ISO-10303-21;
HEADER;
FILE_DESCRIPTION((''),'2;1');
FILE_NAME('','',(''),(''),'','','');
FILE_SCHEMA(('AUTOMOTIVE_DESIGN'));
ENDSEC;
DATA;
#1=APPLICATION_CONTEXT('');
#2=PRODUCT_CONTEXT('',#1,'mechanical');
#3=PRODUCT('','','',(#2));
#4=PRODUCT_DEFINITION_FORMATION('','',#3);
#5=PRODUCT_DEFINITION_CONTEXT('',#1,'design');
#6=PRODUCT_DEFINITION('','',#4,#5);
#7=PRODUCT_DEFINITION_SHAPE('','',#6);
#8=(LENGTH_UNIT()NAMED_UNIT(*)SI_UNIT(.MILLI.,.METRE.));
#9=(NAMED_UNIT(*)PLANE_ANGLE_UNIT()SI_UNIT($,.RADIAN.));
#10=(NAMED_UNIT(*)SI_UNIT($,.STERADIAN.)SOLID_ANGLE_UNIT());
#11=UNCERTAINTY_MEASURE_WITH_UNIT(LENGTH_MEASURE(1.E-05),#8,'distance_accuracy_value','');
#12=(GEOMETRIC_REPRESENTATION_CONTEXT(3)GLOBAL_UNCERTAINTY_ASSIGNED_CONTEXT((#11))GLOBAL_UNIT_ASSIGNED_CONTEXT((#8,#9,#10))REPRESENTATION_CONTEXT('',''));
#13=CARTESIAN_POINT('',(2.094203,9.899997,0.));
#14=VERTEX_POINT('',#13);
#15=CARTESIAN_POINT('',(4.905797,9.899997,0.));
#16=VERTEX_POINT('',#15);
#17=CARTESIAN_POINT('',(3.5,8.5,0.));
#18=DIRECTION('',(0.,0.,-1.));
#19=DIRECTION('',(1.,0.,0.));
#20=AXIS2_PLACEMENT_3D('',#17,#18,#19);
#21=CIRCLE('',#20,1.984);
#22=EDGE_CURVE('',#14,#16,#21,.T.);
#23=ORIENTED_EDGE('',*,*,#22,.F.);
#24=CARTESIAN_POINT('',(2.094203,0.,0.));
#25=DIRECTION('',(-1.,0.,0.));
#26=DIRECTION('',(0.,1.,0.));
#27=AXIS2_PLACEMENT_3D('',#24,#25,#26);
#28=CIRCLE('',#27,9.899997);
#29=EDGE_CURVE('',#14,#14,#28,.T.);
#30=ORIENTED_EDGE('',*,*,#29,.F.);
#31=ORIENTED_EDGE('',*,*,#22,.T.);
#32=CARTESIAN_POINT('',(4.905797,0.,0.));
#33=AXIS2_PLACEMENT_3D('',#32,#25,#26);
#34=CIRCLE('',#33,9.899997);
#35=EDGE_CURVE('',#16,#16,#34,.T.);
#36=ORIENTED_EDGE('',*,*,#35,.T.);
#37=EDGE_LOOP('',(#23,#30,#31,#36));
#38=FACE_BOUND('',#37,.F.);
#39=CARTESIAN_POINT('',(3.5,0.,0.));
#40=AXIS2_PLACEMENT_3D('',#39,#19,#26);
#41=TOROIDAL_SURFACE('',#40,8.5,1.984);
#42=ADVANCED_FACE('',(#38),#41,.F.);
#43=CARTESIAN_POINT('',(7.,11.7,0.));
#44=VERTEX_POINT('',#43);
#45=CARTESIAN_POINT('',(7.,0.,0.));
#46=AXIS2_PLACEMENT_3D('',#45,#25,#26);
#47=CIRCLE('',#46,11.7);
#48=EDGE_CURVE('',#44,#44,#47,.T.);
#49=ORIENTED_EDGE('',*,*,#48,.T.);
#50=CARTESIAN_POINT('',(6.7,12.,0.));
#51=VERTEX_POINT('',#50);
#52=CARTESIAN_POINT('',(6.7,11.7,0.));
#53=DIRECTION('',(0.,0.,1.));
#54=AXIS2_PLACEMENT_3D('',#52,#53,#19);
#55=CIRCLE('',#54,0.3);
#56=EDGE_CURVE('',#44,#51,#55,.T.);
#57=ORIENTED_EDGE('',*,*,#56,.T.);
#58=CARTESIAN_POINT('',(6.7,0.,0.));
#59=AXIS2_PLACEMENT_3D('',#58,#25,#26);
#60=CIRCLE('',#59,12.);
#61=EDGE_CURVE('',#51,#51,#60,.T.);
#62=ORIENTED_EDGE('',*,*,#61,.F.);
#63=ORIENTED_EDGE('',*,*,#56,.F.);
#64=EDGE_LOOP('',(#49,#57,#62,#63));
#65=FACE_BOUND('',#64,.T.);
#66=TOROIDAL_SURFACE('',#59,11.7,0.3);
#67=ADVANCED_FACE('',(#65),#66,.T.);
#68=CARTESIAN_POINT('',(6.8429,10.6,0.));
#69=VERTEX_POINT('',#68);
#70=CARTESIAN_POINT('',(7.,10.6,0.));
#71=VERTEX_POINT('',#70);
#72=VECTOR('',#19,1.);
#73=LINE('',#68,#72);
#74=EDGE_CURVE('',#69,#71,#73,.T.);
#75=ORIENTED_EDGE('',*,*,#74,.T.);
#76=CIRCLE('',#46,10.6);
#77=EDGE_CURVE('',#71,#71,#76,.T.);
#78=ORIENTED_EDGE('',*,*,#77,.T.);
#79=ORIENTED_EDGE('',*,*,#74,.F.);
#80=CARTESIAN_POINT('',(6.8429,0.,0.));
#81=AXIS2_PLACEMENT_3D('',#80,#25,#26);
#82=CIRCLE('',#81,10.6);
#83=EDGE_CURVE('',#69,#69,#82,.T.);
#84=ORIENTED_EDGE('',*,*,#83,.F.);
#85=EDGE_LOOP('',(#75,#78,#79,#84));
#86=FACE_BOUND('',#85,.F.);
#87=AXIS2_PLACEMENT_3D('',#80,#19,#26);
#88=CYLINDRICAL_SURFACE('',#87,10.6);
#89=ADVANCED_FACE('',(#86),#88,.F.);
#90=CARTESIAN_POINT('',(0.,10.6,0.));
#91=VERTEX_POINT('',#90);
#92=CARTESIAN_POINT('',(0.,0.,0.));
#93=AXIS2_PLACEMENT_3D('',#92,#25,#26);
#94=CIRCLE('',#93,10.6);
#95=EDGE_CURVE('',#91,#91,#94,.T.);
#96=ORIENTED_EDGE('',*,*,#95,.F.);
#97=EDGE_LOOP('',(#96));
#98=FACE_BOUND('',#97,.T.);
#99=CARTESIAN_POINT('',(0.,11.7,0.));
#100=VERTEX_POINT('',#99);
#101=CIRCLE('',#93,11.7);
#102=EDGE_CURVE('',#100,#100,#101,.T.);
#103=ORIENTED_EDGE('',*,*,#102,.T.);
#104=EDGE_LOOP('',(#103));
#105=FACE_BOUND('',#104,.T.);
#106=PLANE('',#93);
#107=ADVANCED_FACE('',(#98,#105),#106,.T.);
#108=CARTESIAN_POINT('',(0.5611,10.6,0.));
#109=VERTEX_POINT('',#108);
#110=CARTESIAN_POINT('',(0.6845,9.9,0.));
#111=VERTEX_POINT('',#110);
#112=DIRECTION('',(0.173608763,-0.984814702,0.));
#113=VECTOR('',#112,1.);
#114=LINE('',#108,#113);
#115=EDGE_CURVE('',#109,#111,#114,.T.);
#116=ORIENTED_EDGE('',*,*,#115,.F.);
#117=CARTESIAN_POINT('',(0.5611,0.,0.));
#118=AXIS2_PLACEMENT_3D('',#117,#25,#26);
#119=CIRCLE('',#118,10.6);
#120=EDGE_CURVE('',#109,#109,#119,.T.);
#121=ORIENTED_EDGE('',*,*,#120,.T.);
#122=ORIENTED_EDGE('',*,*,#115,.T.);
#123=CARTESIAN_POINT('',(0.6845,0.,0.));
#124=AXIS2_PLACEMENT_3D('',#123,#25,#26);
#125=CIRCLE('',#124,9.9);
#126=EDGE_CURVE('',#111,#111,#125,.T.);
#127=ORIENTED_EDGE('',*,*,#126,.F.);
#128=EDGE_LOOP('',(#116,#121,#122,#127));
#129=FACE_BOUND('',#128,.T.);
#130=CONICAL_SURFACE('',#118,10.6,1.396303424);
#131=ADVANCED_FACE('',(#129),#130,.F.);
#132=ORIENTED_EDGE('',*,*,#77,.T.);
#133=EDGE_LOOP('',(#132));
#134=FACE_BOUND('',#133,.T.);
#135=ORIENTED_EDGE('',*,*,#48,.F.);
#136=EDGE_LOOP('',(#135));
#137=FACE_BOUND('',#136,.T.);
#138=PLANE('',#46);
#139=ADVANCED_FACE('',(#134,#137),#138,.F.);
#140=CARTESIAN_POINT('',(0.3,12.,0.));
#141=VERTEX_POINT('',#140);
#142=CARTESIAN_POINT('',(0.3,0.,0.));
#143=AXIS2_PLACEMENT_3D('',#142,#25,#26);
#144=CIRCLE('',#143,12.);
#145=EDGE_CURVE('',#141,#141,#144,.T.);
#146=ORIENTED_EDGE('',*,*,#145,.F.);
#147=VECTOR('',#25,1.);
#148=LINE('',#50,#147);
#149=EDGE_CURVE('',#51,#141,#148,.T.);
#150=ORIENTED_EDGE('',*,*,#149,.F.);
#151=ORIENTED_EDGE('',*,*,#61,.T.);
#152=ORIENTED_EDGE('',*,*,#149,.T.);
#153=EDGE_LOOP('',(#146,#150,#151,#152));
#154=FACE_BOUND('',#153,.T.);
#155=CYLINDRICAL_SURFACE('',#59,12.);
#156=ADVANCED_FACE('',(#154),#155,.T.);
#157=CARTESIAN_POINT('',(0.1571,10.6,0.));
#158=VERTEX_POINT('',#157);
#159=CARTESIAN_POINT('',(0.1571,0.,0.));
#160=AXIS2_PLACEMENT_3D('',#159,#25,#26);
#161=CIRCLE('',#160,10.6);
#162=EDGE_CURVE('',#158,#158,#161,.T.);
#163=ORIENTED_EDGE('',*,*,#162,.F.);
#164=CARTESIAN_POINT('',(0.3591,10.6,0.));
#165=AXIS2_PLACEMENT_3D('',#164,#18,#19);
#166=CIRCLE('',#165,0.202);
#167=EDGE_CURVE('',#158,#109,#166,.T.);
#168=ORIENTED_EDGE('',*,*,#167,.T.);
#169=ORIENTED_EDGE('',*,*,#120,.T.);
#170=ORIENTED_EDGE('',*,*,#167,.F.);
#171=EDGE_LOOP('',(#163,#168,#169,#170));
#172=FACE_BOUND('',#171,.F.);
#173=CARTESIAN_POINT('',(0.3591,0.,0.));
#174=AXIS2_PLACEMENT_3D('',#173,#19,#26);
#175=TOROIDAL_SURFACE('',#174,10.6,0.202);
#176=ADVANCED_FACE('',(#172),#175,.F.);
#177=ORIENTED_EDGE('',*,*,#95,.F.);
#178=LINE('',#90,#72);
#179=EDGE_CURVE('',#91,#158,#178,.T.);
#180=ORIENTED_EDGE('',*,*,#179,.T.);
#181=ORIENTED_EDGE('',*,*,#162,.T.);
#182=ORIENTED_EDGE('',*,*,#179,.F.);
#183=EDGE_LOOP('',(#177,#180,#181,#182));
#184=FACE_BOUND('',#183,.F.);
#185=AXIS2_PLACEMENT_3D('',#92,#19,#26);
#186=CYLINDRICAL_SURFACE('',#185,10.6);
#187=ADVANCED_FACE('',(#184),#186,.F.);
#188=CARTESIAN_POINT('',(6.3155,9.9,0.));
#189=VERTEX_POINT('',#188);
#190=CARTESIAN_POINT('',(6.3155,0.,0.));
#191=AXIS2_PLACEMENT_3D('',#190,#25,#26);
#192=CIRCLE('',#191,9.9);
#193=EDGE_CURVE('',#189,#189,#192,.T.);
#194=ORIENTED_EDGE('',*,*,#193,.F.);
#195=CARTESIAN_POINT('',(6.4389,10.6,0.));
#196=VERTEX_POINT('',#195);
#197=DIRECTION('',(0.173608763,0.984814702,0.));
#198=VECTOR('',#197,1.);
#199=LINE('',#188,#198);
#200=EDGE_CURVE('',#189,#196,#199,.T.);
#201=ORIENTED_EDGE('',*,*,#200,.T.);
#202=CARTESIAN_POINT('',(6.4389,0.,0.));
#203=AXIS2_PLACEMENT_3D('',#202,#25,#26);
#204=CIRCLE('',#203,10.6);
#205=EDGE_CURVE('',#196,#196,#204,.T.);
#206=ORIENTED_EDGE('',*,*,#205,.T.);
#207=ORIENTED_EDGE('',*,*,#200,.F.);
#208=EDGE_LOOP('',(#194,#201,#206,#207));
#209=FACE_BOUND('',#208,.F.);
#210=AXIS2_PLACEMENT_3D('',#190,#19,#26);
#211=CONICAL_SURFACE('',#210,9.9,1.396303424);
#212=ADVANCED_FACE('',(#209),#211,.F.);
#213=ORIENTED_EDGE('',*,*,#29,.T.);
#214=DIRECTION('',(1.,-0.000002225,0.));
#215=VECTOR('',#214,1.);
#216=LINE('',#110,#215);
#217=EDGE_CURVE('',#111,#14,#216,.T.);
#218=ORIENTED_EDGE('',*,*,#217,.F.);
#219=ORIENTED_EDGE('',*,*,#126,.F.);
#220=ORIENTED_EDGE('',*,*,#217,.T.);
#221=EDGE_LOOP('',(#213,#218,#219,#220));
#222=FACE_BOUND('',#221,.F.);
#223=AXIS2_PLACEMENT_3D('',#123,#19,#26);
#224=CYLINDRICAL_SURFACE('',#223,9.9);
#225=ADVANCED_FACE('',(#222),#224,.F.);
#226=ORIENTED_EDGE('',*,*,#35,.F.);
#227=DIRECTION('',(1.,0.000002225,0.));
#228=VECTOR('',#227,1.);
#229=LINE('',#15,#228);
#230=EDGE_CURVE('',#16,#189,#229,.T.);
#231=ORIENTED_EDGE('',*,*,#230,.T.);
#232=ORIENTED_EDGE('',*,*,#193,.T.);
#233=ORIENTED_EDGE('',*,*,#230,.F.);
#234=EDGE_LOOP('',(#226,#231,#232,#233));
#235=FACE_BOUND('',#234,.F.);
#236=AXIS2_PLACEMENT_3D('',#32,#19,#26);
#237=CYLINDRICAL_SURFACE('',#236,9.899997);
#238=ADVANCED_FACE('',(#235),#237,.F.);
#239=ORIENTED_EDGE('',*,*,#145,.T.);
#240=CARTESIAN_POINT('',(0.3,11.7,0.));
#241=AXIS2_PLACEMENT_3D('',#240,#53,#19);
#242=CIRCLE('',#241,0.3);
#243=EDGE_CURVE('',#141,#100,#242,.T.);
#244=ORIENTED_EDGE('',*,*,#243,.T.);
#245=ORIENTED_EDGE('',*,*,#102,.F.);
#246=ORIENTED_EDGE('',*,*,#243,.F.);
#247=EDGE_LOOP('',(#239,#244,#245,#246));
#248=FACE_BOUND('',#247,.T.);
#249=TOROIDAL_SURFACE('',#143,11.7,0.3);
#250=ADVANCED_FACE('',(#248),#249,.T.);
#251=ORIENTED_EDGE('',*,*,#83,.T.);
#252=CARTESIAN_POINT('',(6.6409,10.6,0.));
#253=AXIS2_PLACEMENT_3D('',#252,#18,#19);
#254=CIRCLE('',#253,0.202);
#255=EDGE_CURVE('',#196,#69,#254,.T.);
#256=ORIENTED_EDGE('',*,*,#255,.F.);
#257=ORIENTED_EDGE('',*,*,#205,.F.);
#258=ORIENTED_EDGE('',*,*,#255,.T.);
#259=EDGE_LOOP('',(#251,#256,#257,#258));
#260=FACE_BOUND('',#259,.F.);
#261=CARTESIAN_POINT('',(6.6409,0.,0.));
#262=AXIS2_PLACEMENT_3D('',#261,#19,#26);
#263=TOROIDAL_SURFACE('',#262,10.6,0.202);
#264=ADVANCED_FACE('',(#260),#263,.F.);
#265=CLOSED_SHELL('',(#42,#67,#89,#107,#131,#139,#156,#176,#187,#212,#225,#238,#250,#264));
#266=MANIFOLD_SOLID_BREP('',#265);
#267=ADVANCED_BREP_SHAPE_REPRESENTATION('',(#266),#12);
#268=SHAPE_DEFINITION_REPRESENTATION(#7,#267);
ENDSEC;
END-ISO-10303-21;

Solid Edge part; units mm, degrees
sketch "Sketch1" plane through (0, 0, 0) normal (0, 0, 1) x (1, 0, 0)
  line L0 (0, 11.7) -> (0, 10.6)
  line L1 (0, 10.6) -> (0.1571, 10.6)
  arc A0 (0.1571, 10.6) -> (0.5611, 10.6) centre (0.3591, 10.6) cw
  line L2 (0.5611, 10.6) -> (0.6845, 9.9)
  line L3 (0.6845, 9.9) -> (2.0942, 9.9)
  arc A1 (2.0942, 9.9) -> (4.9058, 9.9) centre (3.5, 8.5) cw
  line L4 (4.9058, 9.9) -> (6.3155, 9.9)
  line L5 (6.3155, 9.9) -> (6.4389, 10.6)
  arc A2 (6.4389, 10.6) -> (6.8429, 10.6) centre (6.6409, 10.6) cw
  line L6 (6.8429, 10.6) -> (7, 10.6)
  line L7 (7, 10.6) -> (7, 11.7)
  arc A3 (7, 11.7) -> (6.7, 12) centre (6.7, 11.7) ccw
  line L8 (6.7, 12) -> (0.3, 12)
  arc A4 (0.3, 12) -> (0, 11.7) centre (0.3, 11.7) ccw
revolve "RevolvedProtrusion1" add sketch "Sketch1" angle 360 about axis through (6.7, 0, 0) along (-1, 0, 0)
